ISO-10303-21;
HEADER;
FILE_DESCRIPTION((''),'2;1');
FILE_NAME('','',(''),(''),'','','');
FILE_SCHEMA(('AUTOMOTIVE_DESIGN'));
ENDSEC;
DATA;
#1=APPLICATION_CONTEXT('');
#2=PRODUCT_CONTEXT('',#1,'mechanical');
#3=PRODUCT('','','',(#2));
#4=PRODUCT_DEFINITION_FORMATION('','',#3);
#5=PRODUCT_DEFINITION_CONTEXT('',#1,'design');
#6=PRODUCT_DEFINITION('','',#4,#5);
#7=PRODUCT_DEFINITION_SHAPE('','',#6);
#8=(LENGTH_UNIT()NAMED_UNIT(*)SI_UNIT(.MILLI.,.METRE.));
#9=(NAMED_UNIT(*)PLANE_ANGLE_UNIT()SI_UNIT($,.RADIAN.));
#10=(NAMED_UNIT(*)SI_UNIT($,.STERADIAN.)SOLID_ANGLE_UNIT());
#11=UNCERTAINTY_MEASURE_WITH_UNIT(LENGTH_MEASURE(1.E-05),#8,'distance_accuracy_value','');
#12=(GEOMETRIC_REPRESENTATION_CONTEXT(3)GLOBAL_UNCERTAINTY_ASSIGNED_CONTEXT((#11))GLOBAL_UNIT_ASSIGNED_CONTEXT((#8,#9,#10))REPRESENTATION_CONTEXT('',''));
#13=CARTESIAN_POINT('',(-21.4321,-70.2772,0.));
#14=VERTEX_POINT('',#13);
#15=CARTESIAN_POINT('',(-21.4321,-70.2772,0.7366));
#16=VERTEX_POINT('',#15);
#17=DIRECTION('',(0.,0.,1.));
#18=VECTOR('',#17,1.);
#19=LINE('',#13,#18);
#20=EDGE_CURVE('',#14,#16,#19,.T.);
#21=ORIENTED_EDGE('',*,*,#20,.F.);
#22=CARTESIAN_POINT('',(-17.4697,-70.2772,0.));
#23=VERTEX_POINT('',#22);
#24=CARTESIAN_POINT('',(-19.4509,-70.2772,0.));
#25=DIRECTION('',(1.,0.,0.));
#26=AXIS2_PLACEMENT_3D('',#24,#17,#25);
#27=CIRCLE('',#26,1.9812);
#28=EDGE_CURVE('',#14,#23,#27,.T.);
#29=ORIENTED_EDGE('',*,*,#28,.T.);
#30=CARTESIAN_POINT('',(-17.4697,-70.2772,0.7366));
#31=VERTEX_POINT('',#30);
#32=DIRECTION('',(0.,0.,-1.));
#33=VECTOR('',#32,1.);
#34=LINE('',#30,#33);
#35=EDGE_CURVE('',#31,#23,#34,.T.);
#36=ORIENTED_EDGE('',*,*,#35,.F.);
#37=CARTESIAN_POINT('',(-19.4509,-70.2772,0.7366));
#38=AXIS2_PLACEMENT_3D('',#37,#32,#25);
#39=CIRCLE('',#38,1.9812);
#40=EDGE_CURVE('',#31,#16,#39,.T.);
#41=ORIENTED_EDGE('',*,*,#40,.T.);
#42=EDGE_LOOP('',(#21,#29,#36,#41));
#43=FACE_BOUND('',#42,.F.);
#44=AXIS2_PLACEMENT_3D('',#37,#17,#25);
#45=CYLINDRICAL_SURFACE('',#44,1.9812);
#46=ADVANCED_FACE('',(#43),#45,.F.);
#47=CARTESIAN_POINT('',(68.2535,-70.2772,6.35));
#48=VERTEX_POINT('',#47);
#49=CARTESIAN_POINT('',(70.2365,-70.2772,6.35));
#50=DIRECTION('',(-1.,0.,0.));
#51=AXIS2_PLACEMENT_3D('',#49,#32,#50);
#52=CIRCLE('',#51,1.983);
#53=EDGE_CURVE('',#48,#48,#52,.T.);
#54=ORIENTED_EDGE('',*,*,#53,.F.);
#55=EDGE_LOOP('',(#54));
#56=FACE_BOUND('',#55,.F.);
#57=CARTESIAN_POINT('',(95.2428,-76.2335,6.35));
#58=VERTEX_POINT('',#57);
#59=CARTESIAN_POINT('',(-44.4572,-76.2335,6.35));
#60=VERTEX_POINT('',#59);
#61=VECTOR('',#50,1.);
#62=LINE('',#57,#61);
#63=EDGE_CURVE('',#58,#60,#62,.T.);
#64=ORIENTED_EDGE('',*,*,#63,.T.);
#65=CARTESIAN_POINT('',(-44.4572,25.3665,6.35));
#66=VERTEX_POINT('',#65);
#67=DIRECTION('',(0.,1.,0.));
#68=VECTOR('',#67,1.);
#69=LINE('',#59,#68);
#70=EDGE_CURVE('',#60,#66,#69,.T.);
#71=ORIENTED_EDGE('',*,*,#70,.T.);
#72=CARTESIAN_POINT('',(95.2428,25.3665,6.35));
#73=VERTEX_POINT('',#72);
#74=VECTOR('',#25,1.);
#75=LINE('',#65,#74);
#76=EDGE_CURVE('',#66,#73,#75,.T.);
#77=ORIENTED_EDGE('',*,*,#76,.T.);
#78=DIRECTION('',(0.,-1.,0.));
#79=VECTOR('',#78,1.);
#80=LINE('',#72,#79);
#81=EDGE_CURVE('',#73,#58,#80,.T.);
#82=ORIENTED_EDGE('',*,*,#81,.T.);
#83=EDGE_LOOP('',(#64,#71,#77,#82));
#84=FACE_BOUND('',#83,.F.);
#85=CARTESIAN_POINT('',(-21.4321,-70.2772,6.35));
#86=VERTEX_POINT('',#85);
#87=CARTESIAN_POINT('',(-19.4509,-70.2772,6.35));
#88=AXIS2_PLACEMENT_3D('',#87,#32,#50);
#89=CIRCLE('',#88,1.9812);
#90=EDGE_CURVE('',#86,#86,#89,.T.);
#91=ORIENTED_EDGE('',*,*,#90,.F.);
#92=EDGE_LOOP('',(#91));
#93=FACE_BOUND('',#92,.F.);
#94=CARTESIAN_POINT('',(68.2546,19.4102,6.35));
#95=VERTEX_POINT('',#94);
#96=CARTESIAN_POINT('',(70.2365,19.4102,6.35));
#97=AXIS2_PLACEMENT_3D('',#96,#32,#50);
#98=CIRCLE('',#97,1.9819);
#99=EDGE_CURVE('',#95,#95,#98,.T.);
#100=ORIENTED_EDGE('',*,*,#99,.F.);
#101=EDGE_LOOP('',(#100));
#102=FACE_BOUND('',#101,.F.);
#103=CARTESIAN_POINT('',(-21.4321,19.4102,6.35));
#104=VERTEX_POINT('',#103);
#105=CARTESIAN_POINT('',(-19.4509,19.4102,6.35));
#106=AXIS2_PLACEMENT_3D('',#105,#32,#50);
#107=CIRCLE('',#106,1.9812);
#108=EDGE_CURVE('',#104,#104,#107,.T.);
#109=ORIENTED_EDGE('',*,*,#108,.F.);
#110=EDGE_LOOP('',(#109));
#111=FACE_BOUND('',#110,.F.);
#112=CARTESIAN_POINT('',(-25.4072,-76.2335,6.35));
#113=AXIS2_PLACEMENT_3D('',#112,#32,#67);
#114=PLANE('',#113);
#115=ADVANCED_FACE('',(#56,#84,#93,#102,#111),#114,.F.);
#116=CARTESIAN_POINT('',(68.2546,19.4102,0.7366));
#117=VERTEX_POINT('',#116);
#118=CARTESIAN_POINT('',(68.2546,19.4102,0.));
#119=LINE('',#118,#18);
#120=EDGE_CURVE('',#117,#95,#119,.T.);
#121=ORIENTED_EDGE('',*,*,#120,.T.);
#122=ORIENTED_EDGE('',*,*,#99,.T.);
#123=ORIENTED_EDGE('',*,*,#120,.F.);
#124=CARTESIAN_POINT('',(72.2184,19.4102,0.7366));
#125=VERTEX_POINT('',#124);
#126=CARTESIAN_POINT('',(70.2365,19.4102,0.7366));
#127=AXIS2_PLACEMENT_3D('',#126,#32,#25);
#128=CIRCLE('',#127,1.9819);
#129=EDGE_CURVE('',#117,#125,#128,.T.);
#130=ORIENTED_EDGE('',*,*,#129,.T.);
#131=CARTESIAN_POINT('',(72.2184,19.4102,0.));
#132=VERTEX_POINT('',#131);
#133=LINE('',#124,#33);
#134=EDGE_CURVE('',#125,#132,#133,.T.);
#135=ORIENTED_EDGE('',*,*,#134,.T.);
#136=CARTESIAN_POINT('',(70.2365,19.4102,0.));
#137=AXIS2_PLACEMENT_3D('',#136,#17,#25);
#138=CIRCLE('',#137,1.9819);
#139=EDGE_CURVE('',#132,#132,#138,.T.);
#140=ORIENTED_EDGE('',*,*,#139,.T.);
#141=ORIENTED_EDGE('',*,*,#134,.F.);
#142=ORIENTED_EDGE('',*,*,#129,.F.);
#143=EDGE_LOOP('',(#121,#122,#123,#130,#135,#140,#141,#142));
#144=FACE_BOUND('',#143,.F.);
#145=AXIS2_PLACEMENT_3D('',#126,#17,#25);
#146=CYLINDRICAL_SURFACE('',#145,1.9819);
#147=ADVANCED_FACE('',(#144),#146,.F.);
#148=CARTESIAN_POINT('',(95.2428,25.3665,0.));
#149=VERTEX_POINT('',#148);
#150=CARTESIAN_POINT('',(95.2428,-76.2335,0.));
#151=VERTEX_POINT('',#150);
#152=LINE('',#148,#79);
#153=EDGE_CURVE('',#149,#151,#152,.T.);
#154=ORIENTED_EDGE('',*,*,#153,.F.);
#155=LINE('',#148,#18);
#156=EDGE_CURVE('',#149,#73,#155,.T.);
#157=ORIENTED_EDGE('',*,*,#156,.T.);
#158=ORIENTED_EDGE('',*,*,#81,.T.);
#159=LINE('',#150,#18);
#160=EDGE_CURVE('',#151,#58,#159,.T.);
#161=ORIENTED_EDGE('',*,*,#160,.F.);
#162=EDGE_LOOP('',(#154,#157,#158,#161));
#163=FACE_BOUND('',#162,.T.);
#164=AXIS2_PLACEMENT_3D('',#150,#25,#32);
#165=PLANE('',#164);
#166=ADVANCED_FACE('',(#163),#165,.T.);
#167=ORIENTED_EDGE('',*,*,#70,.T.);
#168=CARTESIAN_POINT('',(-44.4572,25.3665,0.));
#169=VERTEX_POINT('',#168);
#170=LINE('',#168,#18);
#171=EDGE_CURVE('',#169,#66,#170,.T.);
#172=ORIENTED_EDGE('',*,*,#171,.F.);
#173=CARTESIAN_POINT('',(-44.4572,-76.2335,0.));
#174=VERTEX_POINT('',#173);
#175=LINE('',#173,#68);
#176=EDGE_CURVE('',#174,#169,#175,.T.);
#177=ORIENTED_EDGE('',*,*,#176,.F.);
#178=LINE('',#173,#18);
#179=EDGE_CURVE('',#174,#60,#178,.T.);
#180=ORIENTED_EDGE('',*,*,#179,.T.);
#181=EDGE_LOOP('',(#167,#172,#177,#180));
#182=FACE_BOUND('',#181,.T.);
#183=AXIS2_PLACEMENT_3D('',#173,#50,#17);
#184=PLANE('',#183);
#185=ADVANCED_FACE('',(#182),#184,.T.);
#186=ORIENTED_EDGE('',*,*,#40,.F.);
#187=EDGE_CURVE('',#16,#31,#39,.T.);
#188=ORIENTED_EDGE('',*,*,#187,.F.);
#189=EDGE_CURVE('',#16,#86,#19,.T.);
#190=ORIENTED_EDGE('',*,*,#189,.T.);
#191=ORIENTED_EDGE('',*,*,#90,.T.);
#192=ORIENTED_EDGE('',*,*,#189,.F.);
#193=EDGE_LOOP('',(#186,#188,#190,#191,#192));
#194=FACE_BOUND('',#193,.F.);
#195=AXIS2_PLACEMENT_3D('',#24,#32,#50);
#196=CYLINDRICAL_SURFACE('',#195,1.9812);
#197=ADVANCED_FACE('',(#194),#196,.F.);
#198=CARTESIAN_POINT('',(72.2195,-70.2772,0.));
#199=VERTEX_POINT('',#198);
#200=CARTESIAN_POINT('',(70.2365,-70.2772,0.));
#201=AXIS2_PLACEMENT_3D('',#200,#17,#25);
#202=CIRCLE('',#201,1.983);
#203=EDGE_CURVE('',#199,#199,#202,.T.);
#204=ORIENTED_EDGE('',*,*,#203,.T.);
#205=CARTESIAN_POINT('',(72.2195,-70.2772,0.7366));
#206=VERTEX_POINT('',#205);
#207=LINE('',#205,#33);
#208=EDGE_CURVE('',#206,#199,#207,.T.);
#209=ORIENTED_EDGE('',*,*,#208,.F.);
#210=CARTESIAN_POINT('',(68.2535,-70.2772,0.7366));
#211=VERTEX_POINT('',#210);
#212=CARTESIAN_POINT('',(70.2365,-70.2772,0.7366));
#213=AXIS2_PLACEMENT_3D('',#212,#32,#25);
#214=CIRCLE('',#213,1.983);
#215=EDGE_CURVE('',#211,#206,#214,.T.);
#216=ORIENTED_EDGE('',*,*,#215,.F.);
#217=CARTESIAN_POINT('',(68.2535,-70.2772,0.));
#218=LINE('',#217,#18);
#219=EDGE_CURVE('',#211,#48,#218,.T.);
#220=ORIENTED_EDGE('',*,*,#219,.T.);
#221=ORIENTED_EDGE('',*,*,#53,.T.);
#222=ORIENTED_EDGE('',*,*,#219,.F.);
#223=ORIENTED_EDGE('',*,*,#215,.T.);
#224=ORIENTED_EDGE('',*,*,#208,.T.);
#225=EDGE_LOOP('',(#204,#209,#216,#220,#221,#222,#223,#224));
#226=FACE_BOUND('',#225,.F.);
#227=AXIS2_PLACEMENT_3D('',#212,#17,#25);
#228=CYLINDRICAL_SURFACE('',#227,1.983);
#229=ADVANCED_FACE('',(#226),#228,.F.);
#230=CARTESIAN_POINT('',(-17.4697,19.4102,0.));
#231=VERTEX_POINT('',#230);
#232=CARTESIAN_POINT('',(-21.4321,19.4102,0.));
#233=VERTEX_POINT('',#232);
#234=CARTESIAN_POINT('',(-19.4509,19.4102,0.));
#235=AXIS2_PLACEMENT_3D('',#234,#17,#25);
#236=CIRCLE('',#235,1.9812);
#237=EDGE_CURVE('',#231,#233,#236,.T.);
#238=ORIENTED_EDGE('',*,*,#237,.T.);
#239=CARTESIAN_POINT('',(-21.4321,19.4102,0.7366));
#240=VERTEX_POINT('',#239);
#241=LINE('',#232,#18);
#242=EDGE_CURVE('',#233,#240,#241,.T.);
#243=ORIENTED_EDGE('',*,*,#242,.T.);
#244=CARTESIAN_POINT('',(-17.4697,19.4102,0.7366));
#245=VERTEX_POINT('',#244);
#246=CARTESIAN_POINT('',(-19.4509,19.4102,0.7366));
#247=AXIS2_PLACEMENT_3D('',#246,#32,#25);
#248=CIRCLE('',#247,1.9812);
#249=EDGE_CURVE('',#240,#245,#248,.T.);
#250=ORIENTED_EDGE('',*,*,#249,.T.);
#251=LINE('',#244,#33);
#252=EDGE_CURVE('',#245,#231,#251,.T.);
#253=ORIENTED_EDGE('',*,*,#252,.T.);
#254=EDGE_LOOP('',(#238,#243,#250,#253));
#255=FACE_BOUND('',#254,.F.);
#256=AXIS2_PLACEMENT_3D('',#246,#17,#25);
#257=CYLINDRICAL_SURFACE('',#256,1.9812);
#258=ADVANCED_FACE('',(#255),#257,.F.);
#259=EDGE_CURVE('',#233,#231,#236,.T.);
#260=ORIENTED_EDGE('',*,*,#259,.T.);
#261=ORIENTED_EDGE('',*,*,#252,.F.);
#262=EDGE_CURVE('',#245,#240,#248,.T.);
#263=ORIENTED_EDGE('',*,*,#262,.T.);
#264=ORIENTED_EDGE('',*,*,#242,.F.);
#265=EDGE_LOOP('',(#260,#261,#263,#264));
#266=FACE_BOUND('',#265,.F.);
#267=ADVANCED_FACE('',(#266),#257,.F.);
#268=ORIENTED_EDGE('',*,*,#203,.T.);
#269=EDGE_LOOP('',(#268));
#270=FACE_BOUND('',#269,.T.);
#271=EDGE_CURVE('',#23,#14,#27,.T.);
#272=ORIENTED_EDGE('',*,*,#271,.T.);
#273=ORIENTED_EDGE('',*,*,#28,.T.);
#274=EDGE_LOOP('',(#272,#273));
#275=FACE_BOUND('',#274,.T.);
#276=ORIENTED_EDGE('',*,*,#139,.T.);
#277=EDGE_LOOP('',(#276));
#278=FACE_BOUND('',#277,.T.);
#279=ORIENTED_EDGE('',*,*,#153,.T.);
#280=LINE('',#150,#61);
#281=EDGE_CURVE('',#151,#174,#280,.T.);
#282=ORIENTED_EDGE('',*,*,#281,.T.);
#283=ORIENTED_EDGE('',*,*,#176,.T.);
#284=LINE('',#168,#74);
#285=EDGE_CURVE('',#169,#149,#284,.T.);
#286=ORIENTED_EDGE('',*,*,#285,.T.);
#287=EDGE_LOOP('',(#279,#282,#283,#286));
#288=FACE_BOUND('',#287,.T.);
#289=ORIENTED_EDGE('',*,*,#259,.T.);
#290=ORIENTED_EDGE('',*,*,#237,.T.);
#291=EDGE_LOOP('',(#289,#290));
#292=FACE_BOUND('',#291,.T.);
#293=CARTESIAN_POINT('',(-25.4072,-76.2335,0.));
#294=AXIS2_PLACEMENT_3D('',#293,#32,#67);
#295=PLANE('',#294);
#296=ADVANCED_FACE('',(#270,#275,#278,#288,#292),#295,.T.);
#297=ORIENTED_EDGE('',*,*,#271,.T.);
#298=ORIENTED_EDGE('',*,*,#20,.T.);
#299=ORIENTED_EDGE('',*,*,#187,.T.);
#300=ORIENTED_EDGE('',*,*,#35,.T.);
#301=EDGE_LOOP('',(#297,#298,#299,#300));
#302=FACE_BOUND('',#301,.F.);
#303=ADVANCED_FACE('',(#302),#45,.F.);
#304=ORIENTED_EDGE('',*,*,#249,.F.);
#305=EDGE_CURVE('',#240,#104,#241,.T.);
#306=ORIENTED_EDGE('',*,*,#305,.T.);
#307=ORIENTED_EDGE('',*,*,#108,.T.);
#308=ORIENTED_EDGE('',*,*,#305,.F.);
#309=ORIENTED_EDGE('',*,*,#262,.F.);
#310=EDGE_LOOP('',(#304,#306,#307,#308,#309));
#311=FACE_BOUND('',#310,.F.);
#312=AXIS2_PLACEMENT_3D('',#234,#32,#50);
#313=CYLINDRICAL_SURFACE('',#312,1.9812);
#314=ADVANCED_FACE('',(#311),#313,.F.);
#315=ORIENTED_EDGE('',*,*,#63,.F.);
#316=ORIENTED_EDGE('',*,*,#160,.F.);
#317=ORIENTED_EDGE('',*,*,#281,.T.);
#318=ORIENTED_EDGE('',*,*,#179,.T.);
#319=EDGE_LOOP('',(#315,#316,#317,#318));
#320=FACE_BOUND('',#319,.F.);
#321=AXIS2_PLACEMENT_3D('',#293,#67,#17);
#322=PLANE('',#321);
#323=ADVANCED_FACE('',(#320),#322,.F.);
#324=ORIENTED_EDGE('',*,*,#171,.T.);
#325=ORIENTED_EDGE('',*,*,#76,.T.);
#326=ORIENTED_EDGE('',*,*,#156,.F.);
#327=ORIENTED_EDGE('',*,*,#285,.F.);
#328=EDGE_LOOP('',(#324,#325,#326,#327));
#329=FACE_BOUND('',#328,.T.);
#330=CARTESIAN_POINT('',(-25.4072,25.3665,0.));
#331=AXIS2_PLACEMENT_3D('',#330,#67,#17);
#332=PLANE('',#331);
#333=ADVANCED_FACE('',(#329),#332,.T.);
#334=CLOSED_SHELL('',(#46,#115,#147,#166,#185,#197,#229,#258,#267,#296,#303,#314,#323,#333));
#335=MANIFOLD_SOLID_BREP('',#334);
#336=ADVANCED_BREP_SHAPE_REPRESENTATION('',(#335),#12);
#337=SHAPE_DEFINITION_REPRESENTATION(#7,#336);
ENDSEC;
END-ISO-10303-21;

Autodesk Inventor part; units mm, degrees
ref_plane "YZ Plane" through (0, 0, 0) normal (1, 0, 0) x (0, 1, 0)
ref_plane "XZ Plane" through (0, 0, 0) normal (0, 1, 0) x (-1, 0, 0)
ref_plane "XY Plane" through (0, 0, 0) normal (0, 0, 1) x (1, 0, 0)
sketch "Sketch1" plane through (0, 0, 0) normal (0, 0, 1) x (1, 0, 0)
  line L0 (-25.4072, 25.3665) -> (76.1928, 25.3665)
  line L1 (76.1928, 25.3665) -> (76.1928, -76.2335)
  line L2 (76.1928, -76.2335) -> (-25.4072, -76.2335)
  line L3 (-25.4072, -76.2335) -> (-25.4072, 25.3665)
  point P0 (0, 0)
  dimension "d0" = 101.6
  dimension "d1" = 101.6
extrude "Extrusion1" add sketch "Sketch1" along normal blind 0.7366
sketch "Sketch2" plane through (0, 0, 0.7366) normal (0, 0, 1) x (1, 0, 0)
  line L0 (-25.4072, 25.3665) -> (76.1928, -76.2335)
  line L1 (76.1928, 25.3665) -> (-25.4072, -76.2335)
  circle A0 centre (25.3928, -25.4335) radius 27.432
  point P0 (0, 0)
  dimension "d4" = 54.864
extrude "Extrusion2" cut sketch "Sketch2" against normal blind 0.7366
sketch "Sketch3" plane through (0, 0, 0.7366) normal (0, 0, 1) x (1, 0, 0)
  line L0 (-25.4072, -76.2335) -> (-25.4072, 25.3665) projected
  line L1 (-25.4072, 25.3665) -> (-25.4072, -25.4335)
  line L2 (-25.4072, -25.4335) -> (-25.4072, 19.4102)
  line L3 (-25.4072, 25.3665) -> (76.1928, -76.2335)
  line L4 (76.1928, 25.3665) -> (-25.4072, -76.2335)
  circle A0 centre (-19.4509, 19.4102) radius 1.9812
  point P0 (0, 0)
  dimension "d7" = 44.8437
  dimension "d8" = 3.9624
extrude "Extrusion3" cut sketch "Sketch3" against normal blind 0.7366 contours A0 L3 | L3 A0
sketch "Sketch4" plane through (0, 0, 0.7366) normal (0, 0, 1) x (1, 0, 0)
  line L0 (-25.4072, -76.2335) -> (76.1928, 25.3665)
  line L1 (-25.4072, 25.3665) -> (76.1928, -76.2335)
  circle A0 centre (70.2365, 19.4102) radius 1.9819
  circle A1 centre (70.2365, -70.2772) radius 1.983
  circle A2 centre (-19.4509, -70.2772) radius 1.9812
  point P0 (0, 0)
extrude "Extrusion4" cut sketch "Sketch4" against normal blind 0.7366
sketch "Sketch5" plane through (0, 0, 0.7366) normal (0, 0, 1) x (1, 0, 0)
  circle A0 centre (25.3928, -25.4335) radius 27.432 projected
  circle A1 centre (25.3928, -25.4335) radius 29.972
  circle A2 centre (25.3928, -25.4335) radius 32.512
  point P0 (0, 0)
  dimension "d13" = 59.944
  dimension "d14" = 65.024
extrude "Extrusion5" add sketch "Sketch5" along normal blind 6.6548 contours A2
fillet "Fillet1" radius 3.175 4 edges at (-25.4072, 25.3665, 0.3683) (76.1928, 25.3665, 0.3683) (76.1928, -76.2335, 0.3683) (-25.4072, -76.2335, 0.3683)
sketch "Sketch6" plane through (0, 0, 0) normal (0, 0, -1) x (-1, 0, 0)
  circle A0 centre (-70.2365, 19.4102) radius 1.9819 projected
  circle A1 centre (19.4509, -70.2772) radius 1.9812 projected
  circle A2 centre (-70.2365, -70.2772) radius 1.983 projected
  circle A3 centre (19.4509, 19.4102) radius 1.9812 projected
  line L0 (-76.1928, 25.3665) -> (25.4072, 25.3665)
  line L1 (25.4072, 25.3665) -> (25.4072, -76.2335)
  line L2 (25.4072, -76.2335) -> (-76.1928, -76.2335)
  line L3 (-76.1928, -76.2335) -> (-76.1928, 25.3665)
  point P0 (0, 0)
extrude "Extrusion6" add sketch "Sketch6" against normal blind 6.35
sketch "Sketch7" plane through (0, 0, 6.35) normal (0, 0, 1) x (1, 0, 0)
  line L0 (-14.3145, 13.5707) -> (65.0173, 13.5707)
  line L1 (65.0173, 13.5707) -> (65.0173, -65.16)
  line L2 (65.0173, -65.16) -> (-14.3145, -65.16)
  line L3 (-14.3145, -65.16) -> (-14.3145, 13.5707)
  point P0 (0, 0)
extrude "Extrusion7" cut sketch "Sketch7" along normal blind 6.35
sketch "Sketch8" plane through (0, 0, 6.35) normal (0, 0, 1) x (1, 0, 0)
  circle A0 centre (70.2365, -70.2772) radius 1.983 projected
  circle A1 centre (-19.4509, 19.4102) radius 1.9812 projected
  line L0 (-19.4509, 19.4102) -> (70.2365, 19.4102)
  line L1 (70.2365, 19.4102) -> (70.2365, -70.2772)
  line L2 (70.2365, -70.2772) -> (-19.4509, -70.2772)
  line L3 (-19.4509, -70.2772) -> (-19.4509, 19.4102)
  line L4 (63.8865, 13.0602) -> (-13.1009, 13.0602)
  line L5 (-13.1009, 13.0602) -> (-13.1009, -63.9272)
  line L6 (-13.1009, -63.9272) -> (63.8865, -63.9272)
  line L7 (63.8865, -63.9272) -> (63.8865, 13.0602)
  line L8 (-13.1009, -25.4335) -> (-13.1009, -19.0835)
  line L9 (-13.1009, -19.0835) -> (63.8865, -19.0835)
  line L10 (63.8865, -19.0835) -> (63.8865, -31.7835)
  line L11 (63.8865, -31.7835) -> (-13.1009, -31.7835)
  point P0 (0, 0)
  dimension "d22" = 6.35
  dimension "d23" = 6.35
  dimension "d24" = 12.7
extrude "Extrusion8" cut sketch "Sketch8" against normal blind 25.4 contours L7 L9 L5 L4 | L7 L6 L5 L11
sketch "Sketch9" plane through (0, 0, 6.35) normal (0, 0, 1) x (1, 0, 0)
  line L0 (63.8865, -63.9272) -> (-13.1009, -63.9272) projected
  line L1 (-13.1009, 13.0602) -> (63.8865, 13.0602) projected
  line L2 (-25.4072, 25.3665) -> (76.1928, 25.3665) projected
  line L3 (76.1928, -76.2335) -> (-25.4072, -76.2335) projected
  line L4 (-13.1009, 13.0602) -> (-13.1009, 25.3665)
  line L5 (63.8865, 13.0602) -> (63.8865, 25.3665)
  line L6 (63.8865, -63.9272) -> (63.8865, -76.2335)
  line L7 (-13.1009, -63.9272) -> (-13.1009, -76.2335)
  point P0 (0, 0)
extrude "Extrusion9" cut sketch "Sketch9" against normal blind 25.4
sketch "Sketch10" plane through (0, 0, 6.35) normal (0, 0, 1) x (1, 0, 0)
  line L0 (63.8865, 25.3665) -> (63.8865, -19.0835) projected
  line L1 (63.8865, -19.0835) -> (-13.1009, -19.0835) projected
  line L2 (-13.1009, -19.0835) -> (-13.1009, 25.3665) projected
  line L3 (-13.1009, -76.2335) -> (-13.1009, -31.7835) projected
  line L4 (-13.1009, -31.7835) -> (63.8865, -31.7835) projected
  line L5 (63.8865, -31.7835) -> (63.8865, -76.2335) projected
  line L6 (63.8865, 25.3665) -> (76.1928, 25.3665) projected
  line L7 (-13.1009, 25.3665) -> (63.8865, 25.3665)
  line L8 (-13.1009, -76.2335) -> (63.8865, -76.2335)
  point P0 (0, 0)
extrude "Extrusion10" add sketch "Sketch10" against normal blind 6.35
sketch "Sketch11" plane through (76.1928, -76.2335, 0) normal (1, 0, 0) x (0, 0, -1)
  line L0 (0, 101.6) -> (0, 0) projected
  line L1 (0, 101.6) -> (-6.35, 101.6) projected
  line L2 (-6.35, 101.6) -> (-6.35, 0) projected
  line L3 (0, 0) -> (-6.35, 0) projected
  point P0 (0, 76.2335)
extrude "Extrusion11" add sketch "Sketch11" along normal blind 19.05
sketch "Sketch12" plane through (-25.4072, -76.2335, 0) normal (-1, 0, 0) x (0, 0, 1)
  line L0 (0, 0) -> (0, 101.6) projected
  line L1 (0, 0) -> (6.35, 0) projected
  line L2 (6.35, 0) -> (6.35, 101.6) projected
  line L3 (0, 101.6) -> (6.35, 101.6) projected
  point P0 (0, 76.2335)
extrude "Extrusion12" add sketch "Sketch12" along normal blind 19.05
properties part number "kinect base"
